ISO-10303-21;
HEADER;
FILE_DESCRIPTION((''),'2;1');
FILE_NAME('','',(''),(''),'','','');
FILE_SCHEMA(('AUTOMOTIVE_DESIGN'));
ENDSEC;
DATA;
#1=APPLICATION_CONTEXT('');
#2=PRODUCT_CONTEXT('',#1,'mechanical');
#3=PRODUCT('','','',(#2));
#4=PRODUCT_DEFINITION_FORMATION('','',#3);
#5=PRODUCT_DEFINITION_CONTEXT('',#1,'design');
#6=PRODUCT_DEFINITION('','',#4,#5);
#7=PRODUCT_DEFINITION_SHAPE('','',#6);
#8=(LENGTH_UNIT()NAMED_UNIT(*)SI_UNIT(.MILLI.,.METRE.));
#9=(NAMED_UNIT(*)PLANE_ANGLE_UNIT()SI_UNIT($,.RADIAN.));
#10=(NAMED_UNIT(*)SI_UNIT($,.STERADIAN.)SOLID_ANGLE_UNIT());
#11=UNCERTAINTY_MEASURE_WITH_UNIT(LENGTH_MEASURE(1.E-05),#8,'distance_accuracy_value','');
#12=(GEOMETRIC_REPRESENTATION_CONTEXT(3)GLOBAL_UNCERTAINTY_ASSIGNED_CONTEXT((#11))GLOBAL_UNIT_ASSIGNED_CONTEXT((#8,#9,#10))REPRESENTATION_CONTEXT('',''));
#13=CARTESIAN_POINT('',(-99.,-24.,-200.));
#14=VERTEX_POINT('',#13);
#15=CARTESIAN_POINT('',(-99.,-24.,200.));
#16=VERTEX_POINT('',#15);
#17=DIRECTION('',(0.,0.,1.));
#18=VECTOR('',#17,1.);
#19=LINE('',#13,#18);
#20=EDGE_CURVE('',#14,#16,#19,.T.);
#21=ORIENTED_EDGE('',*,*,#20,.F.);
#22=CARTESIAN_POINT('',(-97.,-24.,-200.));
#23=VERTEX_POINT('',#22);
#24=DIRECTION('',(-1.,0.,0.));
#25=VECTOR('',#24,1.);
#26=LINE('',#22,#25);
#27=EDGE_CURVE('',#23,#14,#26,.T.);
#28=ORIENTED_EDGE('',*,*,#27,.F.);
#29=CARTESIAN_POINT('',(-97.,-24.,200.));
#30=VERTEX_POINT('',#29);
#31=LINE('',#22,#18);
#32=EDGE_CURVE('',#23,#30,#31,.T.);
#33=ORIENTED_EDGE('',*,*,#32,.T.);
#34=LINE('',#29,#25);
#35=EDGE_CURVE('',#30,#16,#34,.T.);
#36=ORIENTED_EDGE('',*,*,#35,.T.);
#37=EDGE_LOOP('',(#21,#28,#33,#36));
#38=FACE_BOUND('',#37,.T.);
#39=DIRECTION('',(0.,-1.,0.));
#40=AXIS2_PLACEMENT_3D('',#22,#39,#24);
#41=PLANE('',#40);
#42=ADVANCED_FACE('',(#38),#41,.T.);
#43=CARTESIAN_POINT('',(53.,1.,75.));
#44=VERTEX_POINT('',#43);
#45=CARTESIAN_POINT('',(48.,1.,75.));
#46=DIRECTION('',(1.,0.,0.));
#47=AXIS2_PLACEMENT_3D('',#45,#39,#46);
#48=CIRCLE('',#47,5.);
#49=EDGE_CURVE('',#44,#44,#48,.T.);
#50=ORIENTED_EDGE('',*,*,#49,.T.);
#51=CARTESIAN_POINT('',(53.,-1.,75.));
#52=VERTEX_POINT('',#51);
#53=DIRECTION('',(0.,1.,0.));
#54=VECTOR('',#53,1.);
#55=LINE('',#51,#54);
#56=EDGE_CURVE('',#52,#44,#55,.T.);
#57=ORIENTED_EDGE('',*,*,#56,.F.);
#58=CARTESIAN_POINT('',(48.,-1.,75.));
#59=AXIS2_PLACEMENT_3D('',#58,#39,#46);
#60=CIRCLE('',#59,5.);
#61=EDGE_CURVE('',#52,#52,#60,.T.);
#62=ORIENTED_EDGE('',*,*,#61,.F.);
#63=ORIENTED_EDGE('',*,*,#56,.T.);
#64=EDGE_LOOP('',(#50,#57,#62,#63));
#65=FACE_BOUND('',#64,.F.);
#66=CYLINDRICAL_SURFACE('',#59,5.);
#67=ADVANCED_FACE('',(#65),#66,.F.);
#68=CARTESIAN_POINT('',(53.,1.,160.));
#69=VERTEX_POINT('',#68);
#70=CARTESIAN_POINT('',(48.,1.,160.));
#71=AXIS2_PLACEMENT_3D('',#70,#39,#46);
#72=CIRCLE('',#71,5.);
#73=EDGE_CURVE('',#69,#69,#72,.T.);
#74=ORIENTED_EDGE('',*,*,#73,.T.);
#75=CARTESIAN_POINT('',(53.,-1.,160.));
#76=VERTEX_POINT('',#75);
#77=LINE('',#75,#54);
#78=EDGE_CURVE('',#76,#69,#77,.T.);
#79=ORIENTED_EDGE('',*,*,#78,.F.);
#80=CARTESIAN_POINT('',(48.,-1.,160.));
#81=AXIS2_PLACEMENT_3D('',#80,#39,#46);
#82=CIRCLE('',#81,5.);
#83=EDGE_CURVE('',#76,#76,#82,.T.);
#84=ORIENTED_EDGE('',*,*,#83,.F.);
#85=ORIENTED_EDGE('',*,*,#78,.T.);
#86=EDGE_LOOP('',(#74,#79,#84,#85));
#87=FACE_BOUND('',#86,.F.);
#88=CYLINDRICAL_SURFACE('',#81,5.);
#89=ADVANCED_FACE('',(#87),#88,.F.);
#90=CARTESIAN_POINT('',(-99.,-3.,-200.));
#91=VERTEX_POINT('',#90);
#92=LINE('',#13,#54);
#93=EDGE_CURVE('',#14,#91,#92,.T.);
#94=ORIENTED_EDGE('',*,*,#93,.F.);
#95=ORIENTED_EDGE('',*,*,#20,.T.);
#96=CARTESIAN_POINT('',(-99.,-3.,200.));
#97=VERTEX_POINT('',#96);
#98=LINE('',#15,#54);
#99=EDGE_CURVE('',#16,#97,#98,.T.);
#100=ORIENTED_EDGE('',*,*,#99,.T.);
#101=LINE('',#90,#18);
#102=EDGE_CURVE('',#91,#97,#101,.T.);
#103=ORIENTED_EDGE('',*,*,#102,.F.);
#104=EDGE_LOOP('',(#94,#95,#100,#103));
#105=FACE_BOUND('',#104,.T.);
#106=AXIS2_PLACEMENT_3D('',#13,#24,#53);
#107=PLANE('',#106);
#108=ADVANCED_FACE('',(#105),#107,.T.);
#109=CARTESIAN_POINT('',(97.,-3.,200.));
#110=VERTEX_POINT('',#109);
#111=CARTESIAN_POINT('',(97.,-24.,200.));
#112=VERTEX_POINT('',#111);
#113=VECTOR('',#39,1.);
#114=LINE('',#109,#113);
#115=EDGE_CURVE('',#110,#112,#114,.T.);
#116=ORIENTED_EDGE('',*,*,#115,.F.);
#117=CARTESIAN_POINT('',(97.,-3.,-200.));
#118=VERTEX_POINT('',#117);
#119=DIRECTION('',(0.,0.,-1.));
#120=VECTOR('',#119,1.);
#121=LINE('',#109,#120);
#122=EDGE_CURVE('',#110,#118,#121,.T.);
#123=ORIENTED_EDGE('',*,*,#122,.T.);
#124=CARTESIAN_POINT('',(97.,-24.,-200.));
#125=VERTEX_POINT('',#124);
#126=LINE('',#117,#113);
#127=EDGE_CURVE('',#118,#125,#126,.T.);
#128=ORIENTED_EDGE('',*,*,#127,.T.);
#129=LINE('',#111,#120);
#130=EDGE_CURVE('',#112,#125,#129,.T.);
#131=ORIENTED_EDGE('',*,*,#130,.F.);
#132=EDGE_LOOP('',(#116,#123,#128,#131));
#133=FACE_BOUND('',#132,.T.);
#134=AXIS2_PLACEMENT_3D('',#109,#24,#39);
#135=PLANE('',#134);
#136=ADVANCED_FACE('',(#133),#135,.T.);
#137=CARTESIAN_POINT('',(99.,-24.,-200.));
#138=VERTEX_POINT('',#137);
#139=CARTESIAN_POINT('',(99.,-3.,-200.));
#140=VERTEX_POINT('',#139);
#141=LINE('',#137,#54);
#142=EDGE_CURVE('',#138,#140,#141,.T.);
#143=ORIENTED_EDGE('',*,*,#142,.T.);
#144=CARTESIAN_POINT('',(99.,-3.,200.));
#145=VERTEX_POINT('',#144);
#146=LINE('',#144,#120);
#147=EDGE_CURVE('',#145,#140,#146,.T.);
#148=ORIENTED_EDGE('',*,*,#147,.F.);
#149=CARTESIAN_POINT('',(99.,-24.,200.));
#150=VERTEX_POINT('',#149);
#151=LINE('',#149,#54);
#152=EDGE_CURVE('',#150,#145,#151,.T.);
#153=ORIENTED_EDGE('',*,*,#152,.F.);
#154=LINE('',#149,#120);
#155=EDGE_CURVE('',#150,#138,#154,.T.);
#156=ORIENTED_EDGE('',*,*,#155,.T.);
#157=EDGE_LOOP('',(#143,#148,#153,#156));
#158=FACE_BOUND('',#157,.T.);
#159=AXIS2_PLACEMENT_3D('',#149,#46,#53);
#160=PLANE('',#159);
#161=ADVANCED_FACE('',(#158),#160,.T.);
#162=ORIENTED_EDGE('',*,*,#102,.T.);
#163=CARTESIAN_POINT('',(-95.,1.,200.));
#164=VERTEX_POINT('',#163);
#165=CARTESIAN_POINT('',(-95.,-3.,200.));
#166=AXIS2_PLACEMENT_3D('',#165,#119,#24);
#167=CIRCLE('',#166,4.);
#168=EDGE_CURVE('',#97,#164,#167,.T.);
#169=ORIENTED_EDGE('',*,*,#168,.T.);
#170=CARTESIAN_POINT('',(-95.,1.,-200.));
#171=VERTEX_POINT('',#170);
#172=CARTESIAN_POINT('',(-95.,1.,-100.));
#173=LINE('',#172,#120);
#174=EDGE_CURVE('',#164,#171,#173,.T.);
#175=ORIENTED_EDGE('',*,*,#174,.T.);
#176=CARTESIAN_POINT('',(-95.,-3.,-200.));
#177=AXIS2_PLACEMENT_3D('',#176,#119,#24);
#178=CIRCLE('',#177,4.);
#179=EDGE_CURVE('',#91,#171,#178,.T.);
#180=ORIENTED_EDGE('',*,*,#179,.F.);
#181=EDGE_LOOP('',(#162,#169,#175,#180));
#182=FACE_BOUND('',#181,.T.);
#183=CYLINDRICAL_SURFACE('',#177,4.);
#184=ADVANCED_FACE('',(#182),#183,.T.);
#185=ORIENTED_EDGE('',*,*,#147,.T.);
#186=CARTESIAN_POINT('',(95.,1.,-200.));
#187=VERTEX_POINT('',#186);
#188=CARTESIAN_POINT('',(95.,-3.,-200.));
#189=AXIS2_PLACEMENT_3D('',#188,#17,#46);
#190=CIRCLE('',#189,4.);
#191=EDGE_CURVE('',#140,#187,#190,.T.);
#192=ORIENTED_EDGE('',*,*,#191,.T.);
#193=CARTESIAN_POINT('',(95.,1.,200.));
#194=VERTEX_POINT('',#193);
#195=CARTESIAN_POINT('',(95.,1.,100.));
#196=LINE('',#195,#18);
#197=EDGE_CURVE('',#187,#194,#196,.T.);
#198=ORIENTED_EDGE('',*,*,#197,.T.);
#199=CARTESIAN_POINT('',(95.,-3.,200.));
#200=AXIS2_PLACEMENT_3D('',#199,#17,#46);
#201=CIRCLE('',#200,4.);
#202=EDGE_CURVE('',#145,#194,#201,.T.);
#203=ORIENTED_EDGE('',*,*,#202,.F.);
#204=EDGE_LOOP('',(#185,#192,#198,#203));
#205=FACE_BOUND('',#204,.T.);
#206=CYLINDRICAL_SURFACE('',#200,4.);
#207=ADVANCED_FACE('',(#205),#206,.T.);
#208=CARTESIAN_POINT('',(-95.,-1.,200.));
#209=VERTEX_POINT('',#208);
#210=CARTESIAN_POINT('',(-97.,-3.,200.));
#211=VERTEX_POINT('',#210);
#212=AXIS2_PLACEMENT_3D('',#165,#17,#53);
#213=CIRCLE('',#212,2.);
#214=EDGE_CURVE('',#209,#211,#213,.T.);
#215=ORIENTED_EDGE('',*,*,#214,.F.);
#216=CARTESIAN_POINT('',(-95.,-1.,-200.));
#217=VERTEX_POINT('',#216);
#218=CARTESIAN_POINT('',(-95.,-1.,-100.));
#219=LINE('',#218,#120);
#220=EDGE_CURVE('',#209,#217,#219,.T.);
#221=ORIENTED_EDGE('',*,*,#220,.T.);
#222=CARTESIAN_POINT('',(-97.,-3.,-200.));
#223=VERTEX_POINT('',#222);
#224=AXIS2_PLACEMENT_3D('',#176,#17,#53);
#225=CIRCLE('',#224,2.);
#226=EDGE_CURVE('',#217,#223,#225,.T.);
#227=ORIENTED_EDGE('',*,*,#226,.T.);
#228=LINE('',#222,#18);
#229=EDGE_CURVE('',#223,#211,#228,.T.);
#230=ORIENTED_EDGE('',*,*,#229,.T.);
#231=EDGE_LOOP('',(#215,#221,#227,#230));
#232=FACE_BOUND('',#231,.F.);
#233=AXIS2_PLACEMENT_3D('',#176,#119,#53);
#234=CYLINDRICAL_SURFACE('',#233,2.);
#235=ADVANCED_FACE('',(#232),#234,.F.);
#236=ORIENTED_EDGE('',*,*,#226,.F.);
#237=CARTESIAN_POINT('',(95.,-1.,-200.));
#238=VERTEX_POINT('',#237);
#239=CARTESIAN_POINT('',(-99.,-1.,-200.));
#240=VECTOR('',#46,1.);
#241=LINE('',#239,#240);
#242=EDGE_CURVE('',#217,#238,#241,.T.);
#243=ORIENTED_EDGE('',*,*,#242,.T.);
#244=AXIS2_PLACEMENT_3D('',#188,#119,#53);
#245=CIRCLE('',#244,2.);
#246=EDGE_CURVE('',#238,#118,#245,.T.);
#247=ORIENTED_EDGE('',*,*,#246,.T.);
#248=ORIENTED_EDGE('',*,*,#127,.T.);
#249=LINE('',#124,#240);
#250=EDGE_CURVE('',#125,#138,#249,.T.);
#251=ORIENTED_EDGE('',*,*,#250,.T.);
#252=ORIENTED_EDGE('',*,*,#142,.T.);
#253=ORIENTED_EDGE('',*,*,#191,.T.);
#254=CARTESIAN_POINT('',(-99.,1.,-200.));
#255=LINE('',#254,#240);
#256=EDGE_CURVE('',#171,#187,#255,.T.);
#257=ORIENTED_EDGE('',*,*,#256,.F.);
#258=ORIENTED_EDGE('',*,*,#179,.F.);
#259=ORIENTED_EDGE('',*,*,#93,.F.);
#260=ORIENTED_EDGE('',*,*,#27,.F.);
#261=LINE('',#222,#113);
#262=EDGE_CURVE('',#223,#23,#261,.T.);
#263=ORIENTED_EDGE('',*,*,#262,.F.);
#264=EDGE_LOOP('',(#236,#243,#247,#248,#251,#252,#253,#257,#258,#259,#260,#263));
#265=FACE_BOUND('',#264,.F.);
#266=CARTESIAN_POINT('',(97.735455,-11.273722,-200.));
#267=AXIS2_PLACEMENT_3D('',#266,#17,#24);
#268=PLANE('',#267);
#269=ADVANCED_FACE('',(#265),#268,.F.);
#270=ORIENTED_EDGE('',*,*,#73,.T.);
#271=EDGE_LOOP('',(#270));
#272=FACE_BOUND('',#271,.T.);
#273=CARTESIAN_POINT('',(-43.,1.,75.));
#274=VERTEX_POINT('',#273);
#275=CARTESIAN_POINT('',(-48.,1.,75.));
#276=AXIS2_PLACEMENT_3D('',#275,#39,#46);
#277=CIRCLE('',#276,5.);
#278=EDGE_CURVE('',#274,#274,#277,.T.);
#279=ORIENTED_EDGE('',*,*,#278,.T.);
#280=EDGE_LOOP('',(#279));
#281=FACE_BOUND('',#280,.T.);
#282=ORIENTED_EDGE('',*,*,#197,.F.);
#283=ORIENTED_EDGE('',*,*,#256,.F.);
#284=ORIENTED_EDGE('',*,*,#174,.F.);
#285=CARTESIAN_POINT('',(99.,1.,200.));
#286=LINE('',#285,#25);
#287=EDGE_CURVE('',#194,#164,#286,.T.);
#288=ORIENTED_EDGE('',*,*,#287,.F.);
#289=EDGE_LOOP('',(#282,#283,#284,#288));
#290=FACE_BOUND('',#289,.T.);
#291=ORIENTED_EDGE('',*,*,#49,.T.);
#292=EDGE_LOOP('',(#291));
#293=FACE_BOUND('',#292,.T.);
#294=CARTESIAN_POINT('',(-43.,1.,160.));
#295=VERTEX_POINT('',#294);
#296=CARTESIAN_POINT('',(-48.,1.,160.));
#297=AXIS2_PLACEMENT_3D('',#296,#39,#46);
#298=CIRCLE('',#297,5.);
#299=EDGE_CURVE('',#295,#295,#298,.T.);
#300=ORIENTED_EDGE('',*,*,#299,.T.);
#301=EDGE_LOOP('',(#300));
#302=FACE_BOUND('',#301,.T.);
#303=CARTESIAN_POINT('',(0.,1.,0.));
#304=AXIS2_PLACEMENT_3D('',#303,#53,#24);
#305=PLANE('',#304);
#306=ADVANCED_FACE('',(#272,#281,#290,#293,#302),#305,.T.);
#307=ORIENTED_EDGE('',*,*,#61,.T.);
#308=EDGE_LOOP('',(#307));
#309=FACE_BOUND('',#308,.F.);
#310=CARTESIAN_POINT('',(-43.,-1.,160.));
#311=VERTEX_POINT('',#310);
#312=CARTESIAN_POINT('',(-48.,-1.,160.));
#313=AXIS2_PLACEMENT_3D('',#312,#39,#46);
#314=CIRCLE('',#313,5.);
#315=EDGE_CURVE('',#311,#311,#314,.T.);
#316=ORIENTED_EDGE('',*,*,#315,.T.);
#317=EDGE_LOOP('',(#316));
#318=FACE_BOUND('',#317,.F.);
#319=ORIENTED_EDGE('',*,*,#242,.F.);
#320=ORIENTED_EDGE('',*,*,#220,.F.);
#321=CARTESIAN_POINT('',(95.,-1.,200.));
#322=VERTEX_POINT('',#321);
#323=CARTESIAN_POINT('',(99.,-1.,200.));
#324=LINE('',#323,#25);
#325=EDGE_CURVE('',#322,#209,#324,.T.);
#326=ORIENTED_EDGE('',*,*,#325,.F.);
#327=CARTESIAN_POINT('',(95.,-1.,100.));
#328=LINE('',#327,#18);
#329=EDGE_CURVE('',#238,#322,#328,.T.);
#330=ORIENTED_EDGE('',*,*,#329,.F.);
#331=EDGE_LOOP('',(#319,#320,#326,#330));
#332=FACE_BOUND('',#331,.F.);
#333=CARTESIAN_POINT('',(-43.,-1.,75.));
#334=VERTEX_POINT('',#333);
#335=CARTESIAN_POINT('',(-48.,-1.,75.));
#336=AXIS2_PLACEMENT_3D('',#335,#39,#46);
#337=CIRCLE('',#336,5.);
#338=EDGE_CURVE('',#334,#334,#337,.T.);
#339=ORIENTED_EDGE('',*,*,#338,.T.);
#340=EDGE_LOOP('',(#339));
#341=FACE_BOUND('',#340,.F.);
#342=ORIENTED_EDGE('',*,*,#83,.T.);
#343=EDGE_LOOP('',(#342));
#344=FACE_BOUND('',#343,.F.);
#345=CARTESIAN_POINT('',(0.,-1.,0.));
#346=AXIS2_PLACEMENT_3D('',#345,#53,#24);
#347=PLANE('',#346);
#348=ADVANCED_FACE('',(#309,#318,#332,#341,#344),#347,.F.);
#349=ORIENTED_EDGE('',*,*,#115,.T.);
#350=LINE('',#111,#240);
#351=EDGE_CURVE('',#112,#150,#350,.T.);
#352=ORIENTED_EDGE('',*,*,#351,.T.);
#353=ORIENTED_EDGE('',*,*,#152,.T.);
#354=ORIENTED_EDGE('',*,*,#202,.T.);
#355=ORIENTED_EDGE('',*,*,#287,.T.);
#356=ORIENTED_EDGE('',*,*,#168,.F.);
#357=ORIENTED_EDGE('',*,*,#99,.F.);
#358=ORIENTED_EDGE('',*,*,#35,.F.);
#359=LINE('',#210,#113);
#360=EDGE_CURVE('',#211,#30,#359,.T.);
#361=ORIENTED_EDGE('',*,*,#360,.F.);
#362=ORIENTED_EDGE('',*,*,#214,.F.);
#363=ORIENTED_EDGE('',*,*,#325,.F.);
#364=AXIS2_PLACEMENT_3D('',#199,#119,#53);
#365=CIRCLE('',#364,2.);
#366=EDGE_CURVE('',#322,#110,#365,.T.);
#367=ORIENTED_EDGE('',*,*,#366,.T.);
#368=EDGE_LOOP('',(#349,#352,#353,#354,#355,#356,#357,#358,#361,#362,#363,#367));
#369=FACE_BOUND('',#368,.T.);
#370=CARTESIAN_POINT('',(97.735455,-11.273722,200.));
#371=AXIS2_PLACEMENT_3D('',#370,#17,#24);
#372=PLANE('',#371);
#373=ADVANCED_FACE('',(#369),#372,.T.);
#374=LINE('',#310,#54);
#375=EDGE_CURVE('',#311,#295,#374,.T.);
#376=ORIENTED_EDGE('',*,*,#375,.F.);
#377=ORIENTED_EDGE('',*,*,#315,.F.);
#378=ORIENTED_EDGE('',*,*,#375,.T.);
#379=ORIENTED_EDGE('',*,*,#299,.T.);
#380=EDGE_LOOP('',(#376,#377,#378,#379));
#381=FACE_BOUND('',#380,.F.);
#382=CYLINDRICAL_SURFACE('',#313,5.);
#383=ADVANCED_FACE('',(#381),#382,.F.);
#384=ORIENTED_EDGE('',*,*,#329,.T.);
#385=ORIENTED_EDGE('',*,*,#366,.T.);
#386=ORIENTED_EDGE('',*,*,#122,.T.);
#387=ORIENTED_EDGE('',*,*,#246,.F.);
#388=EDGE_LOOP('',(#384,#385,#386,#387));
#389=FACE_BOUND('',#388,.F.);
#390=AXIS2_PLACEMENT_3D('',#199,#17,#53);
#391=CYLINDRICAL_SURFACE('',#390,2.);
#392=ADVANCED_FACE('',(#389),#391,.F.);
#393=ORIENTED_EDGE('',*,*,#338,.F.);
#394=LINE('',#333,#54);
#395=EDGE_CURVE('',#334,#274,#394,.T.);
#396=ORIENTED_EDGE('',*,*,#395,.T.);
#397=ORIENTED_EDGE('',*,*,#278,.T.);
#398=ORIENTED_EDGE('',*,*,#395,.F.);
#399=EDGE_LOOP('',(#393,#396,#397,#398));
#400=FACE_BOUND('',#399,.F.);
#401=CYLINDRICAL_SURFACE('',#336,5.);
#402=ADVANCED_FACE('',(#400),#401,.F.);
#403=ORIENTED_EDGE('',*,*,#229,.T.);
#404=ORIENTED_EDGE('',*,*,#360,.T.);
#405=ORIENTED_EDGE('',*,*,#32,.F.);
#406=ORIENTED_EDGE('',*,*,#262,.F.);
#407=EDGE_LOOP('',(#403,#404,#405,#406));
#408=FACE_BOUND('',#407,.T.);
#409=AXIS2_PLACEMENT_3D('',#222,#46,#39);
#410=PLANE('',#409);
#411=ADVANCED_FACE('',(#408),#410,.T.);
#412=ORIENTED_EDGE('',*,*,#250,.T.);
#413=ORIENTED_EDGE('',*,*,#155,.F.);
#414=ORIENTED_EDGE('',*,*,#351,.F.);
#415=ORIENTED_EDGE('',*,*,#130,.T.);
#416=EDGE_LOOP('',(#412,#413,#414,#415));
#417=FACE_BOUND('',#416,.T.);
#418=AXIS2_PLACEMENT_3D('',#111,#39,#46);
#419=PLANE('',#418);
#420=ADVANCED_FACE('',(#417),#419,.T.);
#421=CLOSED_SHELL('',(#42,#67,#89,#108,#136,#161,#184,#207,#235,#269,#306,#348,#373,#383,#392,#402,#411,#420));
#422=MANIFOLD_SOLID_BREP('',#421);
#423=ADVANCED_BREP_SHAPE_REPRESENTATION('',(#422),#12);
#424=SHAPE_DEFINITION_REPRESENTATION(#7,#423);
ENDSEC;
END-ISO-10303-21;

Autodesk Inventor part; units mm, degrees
ref_plane "YZ Plane" through (0, 0, 0) normal (1, 0, 0) x (0, 1, 0)
ref_plane "XZ Plane" through (0, 0, 0) normal (0, 1, 0) x (-1, 0, 0)
ref_plane "XY Plane" through (0, 0, 0) normal (0, 0, 1) x (1, 0, 0)
sketch "Sketch4" plane through (0, 0, 0) normal (0, 1, 0) x (-1, 0, 0)
  line L0 (99, -200) -> (-99, -200)
  line L1 (-99, -200) -> (-99, 200)
  line L2 (-99, 200) -> (99, 200)
  line L3 (99, 200) -> (99, -200)
  line L4 (99, -200) -> (-99, 200) construction
  point P0 (0, 0)
  point P1 (0, 0)
  dimension "d24" = 198
  dimension "d25" = 400
extrude "Plate4" add sketch "Sketch4" along normal mid plane 2
sketch "Sketch7" plane through (0, -1, 0) normal (0, -1, 0) x (1, 0, 0)
  circle A0 centre (48, 75) radius 5
  line L0 (99, 200) -> (99, -200) projected
  line L1 (99, -200) -> (-99, -200) projected
  line L2 (0, -200) -> (0, 200) construction
  line L3 (99, 0) -> (-99, 0) construction
  circle A1 centre (-48, 75) radius 5
  circle A2 centre (48, 160) radius 5
  circle A3 centre (-48, 160) radius 5
  line L4 (99, 200) -> (-99, 200) projected
  point P0 (0, 0)
  point P1 (0, 0)
  dimension "d41" = 10
  dimension "d46" = 85
  dimension "d57" = 96
  dimension "d70" = 125
extrude "Extrusion2" cut sketch "Sketch7" against normal up to surface (2 mm away)
sketch "Sketch9" plane through (97, 1, -200) normal (1, 0, 0) x (0, -1, 0)
  line L0 (0, 400) -> (0, 0)
  line L1 (0, 0) -> (25, 0)
  line L2 (25, 0) -> (25, 400)
  line L3 (25, 400) -> (0, 400)
edge flange "Flange5" height 25 angle 90 thickness 2 bend radius 2 thickness toward (1, 0, 0) relief tear relief width 2 relief depth 1 corner gap 2 corner form 0 edges at (99, 1, 0) (-99, 1, 0) wall of the first edge with corners at (97, 1, 200) (97, 1, -200) (97, -24, -200) (97, -24, 200)
bend "Bend5"
corner "Corner5"
equation "\"d24\" = Ширина_базовой_пластины"
equation "\"d25\" = Длина_базовой_пластины"
equation "\"d26\" = Thickness"
equation "\"d60\" = BendReliefWidth"
equation "\"d61\" = BendReliefDepth"
equation "\"d62\" = MinimumRemnant"
equation "\"d63\" = TransitionRadius"
equation "\"d66\" = BendRadius"
equation "\"d67\" = CornerReliefSize"
equation "\"d68\" = GapSize"
equation "\"d69\" = JacobiRadiusSize"
equation "\"BendRadius\" = Thickness"
equation "\"BendReliefWidth\" = Thickness"
equation "\"BendReliefDepth\" = 0.5 * Thickness"
equation "\"CornerReliefSize\" = 4 * Thickness"
equation "\"MinimumRemnant\" = 2 * Thickness"
equation "\"TransitionRadius\" = BendRadius"
equation "\"JacobiRadiusSize\" = BendRadius"
equation "\"GapSize\" = Thickness"
equation "\"Ширина_базовой_пластины\" = 198"
equation "\"Длина_базовой_пластины\" = 400"
equation "\"Thickness\" = 2"
properties part number "Крепление"
